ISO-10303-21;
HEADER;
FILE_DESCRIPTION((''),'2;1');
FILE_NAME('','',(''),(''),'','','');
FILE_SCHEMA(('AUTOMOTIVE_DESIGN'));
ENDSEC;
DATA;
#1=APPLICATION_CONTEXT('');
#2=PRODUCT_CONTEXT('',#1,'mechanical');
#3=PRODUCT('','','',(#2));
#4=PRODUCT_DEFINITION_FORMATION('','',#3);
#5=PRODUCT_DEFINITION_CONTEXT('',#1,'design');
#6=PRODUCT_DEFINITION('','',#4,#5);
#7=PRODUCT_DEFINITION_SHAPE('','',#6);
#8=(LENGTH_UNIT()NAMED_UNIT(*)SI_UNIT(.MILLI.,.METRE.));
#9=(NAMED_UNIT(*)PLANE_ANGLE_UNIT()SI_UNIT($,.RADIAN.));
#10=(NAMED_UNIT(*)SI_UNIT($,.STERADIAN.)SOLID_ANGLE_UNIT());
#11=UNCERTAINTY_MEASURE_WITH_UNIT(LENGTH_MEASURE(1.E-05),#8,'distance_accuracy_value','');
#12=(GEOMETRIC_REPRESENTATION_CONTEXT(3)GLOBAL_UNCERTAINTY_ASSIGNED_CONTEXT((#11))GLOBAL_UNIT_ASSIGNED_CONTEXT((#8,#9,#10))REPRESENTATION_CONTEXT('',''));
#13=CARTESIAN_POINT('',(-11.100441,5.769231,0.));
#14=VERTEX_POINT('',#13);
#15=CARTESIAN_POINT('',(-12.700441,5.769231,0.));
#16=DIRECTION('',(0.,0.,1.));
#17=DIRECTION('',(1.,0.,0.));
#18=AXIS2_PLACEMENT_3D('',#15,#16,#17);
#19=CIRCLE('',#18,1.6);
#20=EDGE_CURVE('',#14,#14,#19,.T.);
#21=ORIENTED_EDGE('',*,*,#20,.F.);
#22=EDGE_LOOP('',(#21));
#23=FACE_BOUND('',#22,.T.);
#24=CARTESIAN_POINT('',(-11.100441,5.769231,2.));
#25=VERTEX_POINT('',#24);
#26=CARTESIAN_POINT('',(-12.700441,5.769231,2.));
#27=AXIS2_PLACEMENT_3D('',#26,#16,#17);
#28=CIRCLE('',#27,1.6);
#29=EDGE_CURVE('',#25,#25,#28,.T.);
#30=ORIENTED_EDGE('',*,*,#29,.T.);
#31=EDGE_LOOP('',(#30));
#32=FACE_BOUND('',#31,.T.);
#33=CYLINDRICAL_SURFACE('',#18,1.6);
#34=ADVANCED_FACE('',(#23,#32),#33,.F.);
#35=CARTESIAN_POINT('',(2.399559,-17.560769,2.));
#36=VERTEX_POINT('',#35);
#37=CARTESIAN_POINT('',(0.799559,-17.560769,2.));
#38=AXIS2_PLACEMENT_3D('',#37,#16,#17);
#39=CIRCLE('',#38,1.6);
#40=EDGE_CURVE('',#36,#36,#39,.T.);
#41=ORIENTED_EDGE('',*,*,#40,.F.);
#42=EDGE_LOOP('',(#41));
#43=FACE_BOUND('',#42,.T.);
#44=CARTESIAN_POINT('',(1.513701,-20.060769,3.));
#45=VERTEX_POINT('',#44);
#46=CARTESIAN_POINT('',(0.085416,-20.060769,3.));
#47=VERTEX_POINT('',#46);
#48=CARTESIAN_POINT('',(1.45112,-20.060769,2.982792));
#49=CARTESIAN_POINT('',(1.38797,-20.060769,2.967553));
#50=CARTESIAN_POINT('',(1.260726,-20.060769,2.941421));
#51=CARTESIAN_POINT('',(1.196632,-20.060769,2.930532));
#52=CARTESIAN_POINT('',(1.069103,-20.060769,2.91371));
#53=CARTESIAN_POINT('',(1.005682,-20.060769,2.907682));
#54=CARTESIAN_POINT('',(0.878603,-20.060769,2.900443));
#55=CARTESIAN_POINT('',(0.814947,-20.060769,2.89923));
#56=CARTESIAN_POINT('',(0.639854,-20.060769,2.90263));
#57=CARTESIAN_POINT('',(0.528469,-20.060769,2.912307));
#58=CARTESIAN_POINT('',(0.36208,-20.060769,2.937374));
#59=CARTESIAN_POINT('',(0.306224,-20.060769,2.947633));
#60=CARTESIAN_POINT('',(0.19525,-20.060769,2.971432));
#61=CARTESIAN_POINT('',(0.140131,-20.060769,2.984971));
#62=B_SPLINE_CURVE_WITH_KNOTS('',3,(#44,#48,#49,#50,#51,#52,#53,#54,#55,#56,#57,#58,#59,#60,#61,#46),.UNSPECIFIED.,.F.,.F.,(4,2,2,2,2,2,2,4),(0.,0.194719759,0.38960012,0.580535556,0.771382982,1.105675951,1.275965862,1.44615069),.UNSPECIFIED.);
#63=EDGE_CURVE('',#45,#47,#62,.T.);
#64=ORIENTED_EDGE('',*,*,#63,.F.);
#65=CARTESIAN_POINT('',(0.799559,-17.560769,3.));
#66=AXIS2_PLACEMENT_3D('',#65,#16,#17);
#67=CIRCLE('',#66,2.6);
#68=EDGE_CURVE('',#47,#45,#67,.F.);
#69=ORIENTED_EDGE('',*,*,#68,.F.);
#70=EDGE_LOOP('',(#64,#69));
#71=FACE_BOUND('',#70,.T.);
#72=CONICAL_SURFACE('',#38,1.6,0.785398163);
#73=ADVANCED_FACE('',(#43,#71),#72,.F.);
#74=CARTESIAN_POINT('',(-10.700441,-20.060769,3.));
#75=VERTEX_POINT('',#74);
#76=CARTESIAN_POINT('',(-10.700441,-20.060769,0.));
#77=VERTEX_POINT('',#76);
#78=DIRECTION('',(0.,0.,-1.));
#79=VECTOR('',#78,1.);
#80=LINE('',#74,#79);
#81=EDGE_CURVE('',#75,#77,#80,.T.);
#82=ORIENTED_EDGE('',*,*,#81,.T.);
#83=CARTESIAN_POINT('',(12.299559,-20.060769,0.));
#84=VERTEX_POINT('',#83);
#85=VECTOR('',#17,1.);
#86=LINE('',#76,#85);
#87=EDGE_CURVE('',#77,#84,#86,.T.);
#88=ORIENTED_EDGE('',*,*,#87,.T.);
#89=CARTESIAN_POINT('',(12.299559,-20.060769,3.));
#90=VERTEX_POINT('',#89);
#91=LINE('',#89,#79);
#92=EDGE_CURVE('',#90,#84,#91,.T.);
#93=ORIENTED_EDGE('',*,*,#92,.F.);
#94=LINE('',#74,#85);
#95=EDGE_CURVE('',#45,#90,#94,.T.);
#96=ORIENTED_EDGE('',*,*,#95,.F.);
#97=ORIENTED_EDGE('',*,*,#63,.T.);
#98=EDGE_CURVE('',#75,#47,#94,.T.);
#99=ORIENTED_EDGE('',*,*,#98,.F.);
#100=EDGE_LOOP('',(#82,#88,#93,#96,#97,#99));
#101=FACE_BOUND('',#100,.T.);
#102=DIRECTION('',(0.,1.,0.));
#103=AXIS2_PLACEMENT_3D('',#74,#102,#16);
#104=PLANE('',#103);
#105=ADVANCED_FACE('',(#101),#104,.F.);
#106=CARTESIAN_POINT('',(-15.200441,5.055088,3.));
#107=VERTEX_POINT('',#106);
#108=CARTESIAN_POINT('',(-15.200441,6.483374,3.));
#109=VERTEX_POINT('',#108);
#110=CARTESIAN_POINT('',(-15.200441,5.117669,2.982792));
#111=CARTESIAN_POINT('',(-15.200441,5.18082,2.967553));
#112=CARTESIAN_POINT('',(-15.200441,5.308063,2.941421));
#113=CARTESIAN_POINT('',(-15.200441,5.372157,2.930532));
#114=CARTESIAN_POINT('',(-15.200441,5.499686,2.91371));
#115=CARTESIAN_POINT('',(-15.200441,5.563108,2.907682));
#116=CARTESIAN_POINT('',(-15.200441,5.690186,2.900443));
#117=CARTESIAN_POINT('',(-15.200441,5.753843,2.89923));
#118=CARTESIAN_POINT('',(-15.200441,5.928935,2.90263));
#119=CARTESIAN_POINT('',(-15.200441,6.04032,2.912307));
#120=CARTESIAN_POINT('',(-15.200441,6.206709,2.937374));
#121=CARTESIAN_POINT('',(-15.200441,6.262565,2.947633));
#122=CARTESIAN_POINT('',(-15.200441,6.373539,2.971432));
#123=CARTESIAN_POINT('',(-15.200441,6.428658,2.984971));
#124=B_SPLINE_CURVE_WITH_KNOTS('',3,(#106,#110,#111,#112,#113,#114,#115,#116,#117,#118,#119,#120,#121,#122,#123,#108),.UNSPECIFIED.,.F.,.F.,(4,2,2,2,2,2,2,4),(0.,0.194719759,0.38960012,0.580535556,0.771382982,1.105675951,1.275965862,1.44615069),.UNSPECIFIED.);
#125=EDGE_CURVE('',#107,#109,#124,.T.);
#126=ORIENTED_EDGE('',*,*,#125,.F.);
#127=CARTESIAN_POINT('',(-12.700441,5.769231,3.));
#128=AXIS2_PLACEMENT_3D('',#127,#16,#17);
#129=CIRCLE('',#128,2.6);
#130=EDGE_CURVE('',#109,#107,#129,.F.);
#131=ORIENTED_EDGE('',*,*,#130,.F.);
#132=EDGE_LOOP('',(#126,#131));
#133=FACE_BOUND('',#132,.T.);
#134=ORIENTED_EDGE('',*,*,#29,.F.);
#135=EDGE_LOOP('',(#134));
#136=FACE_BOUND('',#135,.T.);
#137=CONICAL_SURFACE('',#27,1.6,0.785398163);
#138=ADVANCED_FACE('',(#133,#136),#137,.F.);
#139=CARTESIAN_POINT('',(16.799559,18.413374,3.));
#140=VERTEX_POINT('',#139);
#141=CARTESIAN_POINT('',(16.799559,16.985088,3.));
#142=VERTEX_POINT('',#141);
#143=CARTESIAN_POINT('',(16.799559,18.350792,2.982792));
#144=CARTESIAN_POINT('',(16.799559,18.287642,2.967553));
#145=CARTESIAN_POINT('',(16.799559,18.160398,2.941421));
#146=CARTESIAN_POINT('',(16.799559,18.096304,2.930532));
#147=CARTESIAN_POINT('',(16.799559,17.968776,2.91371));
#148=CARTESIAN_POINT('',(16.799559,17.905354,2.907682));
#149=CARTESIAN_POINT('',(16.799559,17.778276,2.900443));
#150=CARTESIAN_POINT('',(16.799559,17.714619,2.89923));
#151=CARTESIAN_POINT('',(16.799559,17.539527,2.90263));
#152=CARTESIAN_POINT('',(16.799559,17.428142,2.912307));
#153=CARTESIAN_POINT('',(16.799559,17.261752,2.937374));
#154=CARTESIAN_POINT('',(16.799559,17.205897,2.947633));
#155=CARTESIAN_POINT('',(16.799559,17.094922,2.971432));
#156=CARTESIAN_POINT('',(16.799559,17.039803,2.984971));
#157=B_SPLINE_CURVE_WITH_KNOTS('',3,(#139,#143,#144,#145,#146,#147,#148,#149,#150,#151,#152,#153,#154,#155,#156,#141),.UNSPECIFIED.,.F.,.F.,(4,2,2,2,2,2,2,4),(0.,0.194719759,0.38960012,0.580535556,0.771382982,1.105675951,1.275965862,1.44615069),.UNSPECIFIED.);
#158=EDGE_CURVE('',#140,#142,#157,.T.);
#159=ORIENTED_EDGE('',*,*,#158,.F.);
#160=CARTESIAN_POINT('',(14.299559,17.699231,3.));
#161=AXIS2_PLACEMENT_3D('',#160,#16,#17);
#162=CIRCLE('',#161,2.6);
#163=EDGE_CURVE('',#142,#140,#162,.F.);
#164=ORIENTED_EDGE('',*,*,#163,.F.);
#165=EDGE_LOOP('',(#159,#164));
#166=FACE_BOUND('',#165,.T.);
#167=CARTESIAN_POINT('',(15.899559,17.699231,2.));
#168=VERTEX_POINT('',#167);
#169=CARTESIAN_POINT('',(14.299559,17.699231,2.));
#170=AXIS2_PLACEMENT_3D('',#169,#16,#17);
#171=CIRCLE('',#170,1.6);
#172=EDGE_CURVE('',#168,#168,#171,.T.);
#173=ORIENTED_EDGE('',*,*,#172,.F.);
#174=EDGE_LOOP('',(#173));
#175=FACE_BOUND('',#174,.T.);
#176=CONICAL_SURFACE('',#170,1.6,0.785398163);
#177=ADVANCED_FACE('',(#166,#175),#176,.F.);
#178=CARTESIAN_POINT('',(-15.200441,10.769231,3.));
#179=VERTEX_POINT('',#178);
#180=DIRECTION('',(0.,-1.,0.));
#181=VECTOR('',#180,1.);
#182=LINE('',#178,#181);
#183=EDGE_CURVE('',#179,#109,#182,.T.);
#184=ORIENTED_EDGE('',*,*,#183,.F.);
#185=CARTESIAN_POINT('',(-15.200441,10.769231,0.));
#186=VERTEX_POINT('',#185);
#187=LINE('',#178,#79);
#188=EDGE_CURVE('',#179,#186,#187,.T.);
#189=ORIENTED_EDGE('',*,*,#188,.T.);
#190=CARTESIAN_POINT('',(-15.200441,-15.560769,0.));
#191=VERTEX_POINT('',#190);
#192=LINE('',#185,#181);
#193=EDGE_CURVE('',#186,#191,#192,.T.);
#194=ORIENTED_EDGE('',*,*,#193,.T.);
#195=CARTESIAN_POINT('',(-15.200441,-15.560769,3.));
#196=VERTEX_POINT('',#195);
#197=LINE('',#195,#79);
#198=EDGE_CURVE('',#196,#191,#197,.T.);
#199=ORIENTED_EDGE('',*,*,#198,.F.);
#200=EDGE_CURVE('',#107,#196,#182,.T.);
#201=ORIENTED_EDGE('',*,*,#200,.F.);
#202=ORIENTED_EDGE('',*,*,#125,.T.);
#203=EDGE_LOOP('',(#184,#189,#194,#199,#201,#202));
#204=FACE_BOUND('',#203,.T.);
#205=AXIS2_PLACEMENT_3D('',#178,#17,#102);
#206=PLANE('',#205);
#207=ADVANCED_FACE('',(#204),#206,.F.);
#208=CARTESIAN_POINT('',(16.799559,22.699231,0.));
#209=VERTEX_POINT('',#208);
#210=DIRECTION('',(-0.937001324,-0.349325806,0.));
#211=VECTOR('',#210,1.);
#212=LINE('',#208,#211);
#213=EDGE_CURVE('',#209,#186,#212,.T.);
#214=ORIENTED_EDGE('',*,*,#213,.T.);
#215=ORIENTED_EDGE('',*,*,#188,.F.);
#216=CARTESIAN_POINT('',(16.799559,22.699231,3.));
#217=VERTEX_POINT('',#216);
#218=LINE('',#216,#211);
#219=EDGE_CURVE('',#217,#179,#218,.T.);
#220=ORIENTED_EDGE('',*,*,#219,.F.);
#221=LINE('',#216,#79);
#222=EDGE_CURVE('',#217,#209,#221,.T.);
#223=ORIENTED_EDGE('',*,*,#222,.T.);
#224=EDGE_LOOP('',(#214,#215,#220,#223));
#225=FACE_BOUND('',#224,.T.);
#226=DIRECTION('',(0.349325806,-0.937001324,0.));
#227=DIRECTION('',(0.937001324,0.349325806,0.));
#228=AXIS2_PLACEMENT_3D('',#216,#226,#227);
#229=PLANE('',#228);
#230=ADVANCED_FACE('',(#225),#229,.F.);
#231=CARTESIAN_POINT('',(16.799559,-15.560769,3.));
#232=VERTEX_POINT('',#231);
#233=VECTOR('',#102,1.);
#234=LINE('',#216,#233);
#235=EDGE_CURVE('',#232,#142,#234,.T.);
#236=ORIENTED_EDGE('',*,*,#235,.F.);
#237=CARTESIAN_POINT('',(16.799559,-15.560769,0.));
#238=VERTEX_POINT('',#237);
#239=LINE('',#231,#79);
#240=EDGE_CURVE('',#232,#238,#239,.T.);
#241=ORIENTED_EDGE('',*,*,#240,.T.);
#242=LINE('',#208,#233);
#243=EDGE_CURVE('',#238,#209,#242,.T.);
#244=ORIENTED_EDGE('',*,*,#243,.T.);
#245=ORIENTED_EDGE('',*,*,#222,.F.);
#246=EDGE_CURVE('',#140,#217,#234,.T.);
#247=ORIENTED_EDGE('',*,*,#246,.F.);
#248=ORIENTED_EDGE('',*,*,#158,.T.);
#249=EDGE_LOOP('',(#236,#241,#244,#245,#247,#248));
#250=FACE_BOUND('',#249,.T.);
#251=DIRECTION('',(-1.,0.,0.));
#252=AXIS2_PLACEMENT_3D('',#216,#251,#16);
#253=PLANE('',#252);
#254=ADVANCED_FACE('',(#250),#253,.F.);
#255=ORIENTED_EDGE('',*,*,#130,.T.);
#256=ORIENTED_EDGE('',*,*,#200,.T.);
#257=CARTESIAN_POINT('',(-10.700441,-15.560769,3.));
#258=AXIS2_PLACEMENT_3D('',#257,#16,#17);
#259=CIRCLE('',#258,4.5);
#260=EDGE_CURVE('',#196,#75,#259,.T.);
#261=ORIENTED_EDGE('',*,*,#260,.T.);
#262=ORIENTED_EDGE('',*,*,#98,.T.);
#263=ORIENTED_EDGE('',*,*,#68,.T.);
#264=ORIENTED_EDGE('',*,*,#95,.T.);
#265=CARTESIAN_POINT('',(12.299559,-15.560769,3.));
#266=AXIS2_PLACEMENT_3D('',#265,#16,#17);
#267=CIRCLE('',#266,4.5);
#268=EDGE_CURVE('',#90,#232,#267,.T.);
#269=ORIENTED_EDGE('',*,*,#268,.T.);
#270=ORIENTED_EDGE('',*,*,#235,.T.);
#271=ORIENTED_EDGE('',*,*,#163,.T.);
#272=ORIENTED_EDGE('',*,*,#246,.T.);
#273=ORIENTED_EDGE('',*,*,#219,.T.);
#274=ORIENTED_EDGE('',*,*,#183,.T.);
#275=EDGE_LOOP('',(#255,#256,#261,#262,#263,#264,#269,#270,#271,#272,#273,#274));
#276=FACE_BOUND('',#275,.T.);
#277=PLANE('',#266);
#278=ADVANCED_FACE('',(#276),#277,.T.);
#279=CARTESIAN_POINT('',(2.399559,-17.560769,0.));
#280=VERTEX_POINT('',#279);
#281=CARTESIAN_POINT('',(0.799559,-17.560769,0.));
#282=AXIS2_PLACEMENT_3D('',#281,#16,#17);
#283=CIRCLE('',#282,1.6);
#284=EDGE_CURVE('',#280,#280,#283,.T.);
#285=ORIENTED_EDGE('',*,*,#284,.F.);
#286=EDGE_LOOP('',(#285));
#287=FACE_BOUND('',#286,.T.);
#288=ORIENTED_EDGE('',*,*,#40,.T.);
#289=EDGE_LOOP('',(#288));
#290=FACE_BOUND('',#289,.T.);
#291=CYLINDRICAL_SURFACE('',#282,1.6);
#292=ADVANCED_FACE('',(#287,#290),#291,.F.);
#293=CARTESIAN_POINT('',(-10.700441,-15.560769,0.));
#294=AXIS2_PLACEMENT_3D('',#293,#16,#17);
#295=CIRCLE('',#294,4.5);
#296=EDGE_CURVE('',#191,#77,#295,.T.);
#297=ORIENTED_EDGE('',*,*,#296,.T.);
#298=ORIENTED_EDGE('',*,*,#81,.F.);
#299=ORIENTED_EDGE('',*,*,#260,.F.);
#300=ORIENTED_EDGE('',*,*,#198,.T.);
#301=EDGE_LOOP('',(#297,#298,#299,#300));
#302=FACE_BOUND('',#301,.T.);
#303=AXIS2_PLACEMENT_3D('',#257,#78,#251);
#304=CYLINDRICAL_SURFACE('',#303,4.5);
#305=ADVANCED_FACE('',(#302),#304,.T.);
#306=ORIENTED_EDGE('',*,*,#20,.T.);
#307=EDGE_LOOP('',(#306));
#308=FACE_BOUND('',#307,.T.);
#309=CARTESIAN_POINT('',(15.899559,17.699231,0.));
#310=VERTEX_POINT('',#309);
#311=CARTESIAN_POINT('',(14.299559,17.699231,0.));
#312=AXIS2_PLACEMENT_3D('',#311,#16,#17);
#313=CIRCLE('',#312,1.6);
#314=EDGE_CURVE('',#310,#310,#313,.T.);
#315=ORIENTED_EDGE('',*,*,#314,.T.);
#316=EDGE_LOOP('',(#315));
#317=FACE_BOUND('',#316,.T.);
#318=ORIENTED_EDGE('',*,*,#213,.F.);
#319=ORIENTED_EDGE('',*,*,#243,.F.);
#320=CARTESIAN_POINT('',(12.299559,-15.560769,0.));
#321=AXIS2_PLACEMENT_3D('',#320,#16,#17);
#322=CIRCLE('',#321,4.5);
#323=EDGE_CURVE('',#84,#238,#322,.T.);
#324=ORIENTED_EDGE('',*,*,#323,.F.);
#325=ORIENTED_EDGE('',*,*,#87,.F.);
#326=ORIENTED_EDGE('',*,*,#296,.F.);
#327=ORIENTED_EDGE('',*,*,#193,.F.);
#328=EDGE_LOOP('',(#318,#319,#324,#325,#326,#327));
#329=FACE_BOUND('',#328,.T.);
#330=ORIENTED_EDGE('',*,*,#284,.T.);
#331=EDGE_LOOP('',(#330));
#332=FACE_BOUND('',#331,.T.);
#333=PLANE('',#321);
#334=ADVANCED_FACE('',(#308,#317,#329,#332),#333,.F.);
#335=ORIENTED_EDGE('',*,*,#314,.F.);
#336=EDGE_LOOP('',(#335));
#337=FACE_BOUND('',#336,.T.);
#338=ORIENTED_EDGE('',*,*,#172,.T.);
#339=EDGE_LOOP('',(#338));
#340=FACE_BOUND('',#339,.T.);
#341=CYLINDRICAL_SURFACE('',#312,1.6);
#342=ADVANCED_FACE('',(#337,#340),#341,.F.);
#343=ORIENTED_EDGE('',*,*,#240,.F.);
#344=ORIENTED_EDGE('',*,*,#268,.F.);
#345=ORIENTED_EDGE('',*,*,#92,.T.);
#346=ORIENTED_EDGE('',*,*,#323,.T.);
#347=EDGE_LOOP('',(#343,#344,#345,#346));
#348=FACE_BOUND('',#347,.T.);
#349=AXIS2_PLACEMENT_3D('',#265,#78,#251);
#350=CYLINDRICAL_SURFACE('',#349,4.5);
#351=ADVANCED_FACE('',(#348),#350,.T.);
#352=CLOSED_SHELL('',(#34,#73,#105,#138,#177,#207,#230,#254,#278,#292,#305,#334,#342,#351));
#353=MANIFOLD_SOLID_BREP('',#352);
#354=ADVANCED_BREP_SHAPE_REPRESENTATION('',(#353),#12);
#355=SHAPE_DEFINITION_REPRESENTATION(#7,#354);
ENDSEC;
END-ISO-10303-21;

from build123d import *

# Parameters (mm, degrees)
DODANIE_WYCI_GNI_CIE1_DEPTH = 3
SZKIC2_R                    = 1.6
WYTNIJ_WYCI_GNI_CIE1_DEPTH  = 3
SFAZOWANIE1_SIZE            = 1


with BuildPart() as part:
    # Szkic1 → Dodanie-wyciągnięcie1 (new body)
    with BuildSketch(Plane.XY):
        with BuildLine():
            Line((16.79955852, 22.699230769), (-15.20044148, 10.769230769))
            Line((-15.20044148, 10.769230769), (-15.20044148, -15.560769231))
            ThreePointArc((-15.20044148, -15.560769231), (-13.882421995, -18.742749746), (-10.70044148, -20.060769231))
            Line((-10.70044148, -20.060769231), (12.29955852, -20.060769231))
            ThreePointArc((12.29955852, -20.060769231), (15.481539035, -18.742749746), (16.79955852, -15.560769231))
            Line((16.79955852, -15.560769231), (16.79955852, 22.699230769))
        make_face()
    extrude(amount=DODANIE_WYCI_GNI_CIE1_DEPTH)

    # Szkic2 → Wytnij-wyciągnięcie1 (cut)
    with BuildSketch(Plane.XY.offset(3)):
        with Locations((-12.70044148, 5.769230769)):
            Circle(SZKIC2_R)
        with Locations((14.29955852, 17.699230769)):
            Circle(SZKIC2_R)
        with Locations((0.79955852, -17.560769231)):
            Circle(SZKIC2_R)
    extrude(amount=-WYTNIJ_WYCI_GNI_CIE1_DEPTH, mode=Mode.SUBTRACT)

    # Sfazowanie1
    # the kernel refuses this chamfer: 1 mm, written as the material it takes off along each edge
    with BuildSketch(Plane(origin=(-12.70044148, 5.769230769, 3), x_dir=(1, 0, 0), z_dir=(0, -1, 0))) as sfazowanie1_piece_1:
        Polygon((1.6 + SFAZOWANIE1_SIZE, 0), (1.6, -SFAZOWANIE1_SIZE), (1.6, 0), align=None)
    revolve(axis=Axis((-12.70044148, 5.769230769, 3), (0, 0, 1)), mode=Mode.SUBTRACT)
    with BuildSketch(Plane(origin=(14.29955852, 17.699230769, 3), x_dir=(1, 0, 0), z_dir=(0, -1, 0))) as sfazowanie1_piece_2:
        Polygon((1.6 + SFAZOWANIE1_SIZE, 0), (1.6, -SFAZOWANIE1_SIZE), (1.6, 0), align=None)
    revolve(axis=Axis((14.29955852, 17.699230769, 3), (0, 0, 1)), mode=Mode.SUBTRACT)
    with BuildSketch(Plane(origin=(0.79955852, -17.560769231, 3), x_dir=(1, 0, 0), z_dir=(0, -1, 0))) as sfazowanie1_piece_3:
        Polygon((1.6 + SFAZOWANIE1_SIZE, 0), (1.6, -SFAZOWANIE1_SIZE), (1.6, 0), align=None)
    revolve(axis=Axis((0.79955852, -17.560769231, 3), (0, 0, 1)), mode=Mode.SUBTRACT)


solid = part.part
